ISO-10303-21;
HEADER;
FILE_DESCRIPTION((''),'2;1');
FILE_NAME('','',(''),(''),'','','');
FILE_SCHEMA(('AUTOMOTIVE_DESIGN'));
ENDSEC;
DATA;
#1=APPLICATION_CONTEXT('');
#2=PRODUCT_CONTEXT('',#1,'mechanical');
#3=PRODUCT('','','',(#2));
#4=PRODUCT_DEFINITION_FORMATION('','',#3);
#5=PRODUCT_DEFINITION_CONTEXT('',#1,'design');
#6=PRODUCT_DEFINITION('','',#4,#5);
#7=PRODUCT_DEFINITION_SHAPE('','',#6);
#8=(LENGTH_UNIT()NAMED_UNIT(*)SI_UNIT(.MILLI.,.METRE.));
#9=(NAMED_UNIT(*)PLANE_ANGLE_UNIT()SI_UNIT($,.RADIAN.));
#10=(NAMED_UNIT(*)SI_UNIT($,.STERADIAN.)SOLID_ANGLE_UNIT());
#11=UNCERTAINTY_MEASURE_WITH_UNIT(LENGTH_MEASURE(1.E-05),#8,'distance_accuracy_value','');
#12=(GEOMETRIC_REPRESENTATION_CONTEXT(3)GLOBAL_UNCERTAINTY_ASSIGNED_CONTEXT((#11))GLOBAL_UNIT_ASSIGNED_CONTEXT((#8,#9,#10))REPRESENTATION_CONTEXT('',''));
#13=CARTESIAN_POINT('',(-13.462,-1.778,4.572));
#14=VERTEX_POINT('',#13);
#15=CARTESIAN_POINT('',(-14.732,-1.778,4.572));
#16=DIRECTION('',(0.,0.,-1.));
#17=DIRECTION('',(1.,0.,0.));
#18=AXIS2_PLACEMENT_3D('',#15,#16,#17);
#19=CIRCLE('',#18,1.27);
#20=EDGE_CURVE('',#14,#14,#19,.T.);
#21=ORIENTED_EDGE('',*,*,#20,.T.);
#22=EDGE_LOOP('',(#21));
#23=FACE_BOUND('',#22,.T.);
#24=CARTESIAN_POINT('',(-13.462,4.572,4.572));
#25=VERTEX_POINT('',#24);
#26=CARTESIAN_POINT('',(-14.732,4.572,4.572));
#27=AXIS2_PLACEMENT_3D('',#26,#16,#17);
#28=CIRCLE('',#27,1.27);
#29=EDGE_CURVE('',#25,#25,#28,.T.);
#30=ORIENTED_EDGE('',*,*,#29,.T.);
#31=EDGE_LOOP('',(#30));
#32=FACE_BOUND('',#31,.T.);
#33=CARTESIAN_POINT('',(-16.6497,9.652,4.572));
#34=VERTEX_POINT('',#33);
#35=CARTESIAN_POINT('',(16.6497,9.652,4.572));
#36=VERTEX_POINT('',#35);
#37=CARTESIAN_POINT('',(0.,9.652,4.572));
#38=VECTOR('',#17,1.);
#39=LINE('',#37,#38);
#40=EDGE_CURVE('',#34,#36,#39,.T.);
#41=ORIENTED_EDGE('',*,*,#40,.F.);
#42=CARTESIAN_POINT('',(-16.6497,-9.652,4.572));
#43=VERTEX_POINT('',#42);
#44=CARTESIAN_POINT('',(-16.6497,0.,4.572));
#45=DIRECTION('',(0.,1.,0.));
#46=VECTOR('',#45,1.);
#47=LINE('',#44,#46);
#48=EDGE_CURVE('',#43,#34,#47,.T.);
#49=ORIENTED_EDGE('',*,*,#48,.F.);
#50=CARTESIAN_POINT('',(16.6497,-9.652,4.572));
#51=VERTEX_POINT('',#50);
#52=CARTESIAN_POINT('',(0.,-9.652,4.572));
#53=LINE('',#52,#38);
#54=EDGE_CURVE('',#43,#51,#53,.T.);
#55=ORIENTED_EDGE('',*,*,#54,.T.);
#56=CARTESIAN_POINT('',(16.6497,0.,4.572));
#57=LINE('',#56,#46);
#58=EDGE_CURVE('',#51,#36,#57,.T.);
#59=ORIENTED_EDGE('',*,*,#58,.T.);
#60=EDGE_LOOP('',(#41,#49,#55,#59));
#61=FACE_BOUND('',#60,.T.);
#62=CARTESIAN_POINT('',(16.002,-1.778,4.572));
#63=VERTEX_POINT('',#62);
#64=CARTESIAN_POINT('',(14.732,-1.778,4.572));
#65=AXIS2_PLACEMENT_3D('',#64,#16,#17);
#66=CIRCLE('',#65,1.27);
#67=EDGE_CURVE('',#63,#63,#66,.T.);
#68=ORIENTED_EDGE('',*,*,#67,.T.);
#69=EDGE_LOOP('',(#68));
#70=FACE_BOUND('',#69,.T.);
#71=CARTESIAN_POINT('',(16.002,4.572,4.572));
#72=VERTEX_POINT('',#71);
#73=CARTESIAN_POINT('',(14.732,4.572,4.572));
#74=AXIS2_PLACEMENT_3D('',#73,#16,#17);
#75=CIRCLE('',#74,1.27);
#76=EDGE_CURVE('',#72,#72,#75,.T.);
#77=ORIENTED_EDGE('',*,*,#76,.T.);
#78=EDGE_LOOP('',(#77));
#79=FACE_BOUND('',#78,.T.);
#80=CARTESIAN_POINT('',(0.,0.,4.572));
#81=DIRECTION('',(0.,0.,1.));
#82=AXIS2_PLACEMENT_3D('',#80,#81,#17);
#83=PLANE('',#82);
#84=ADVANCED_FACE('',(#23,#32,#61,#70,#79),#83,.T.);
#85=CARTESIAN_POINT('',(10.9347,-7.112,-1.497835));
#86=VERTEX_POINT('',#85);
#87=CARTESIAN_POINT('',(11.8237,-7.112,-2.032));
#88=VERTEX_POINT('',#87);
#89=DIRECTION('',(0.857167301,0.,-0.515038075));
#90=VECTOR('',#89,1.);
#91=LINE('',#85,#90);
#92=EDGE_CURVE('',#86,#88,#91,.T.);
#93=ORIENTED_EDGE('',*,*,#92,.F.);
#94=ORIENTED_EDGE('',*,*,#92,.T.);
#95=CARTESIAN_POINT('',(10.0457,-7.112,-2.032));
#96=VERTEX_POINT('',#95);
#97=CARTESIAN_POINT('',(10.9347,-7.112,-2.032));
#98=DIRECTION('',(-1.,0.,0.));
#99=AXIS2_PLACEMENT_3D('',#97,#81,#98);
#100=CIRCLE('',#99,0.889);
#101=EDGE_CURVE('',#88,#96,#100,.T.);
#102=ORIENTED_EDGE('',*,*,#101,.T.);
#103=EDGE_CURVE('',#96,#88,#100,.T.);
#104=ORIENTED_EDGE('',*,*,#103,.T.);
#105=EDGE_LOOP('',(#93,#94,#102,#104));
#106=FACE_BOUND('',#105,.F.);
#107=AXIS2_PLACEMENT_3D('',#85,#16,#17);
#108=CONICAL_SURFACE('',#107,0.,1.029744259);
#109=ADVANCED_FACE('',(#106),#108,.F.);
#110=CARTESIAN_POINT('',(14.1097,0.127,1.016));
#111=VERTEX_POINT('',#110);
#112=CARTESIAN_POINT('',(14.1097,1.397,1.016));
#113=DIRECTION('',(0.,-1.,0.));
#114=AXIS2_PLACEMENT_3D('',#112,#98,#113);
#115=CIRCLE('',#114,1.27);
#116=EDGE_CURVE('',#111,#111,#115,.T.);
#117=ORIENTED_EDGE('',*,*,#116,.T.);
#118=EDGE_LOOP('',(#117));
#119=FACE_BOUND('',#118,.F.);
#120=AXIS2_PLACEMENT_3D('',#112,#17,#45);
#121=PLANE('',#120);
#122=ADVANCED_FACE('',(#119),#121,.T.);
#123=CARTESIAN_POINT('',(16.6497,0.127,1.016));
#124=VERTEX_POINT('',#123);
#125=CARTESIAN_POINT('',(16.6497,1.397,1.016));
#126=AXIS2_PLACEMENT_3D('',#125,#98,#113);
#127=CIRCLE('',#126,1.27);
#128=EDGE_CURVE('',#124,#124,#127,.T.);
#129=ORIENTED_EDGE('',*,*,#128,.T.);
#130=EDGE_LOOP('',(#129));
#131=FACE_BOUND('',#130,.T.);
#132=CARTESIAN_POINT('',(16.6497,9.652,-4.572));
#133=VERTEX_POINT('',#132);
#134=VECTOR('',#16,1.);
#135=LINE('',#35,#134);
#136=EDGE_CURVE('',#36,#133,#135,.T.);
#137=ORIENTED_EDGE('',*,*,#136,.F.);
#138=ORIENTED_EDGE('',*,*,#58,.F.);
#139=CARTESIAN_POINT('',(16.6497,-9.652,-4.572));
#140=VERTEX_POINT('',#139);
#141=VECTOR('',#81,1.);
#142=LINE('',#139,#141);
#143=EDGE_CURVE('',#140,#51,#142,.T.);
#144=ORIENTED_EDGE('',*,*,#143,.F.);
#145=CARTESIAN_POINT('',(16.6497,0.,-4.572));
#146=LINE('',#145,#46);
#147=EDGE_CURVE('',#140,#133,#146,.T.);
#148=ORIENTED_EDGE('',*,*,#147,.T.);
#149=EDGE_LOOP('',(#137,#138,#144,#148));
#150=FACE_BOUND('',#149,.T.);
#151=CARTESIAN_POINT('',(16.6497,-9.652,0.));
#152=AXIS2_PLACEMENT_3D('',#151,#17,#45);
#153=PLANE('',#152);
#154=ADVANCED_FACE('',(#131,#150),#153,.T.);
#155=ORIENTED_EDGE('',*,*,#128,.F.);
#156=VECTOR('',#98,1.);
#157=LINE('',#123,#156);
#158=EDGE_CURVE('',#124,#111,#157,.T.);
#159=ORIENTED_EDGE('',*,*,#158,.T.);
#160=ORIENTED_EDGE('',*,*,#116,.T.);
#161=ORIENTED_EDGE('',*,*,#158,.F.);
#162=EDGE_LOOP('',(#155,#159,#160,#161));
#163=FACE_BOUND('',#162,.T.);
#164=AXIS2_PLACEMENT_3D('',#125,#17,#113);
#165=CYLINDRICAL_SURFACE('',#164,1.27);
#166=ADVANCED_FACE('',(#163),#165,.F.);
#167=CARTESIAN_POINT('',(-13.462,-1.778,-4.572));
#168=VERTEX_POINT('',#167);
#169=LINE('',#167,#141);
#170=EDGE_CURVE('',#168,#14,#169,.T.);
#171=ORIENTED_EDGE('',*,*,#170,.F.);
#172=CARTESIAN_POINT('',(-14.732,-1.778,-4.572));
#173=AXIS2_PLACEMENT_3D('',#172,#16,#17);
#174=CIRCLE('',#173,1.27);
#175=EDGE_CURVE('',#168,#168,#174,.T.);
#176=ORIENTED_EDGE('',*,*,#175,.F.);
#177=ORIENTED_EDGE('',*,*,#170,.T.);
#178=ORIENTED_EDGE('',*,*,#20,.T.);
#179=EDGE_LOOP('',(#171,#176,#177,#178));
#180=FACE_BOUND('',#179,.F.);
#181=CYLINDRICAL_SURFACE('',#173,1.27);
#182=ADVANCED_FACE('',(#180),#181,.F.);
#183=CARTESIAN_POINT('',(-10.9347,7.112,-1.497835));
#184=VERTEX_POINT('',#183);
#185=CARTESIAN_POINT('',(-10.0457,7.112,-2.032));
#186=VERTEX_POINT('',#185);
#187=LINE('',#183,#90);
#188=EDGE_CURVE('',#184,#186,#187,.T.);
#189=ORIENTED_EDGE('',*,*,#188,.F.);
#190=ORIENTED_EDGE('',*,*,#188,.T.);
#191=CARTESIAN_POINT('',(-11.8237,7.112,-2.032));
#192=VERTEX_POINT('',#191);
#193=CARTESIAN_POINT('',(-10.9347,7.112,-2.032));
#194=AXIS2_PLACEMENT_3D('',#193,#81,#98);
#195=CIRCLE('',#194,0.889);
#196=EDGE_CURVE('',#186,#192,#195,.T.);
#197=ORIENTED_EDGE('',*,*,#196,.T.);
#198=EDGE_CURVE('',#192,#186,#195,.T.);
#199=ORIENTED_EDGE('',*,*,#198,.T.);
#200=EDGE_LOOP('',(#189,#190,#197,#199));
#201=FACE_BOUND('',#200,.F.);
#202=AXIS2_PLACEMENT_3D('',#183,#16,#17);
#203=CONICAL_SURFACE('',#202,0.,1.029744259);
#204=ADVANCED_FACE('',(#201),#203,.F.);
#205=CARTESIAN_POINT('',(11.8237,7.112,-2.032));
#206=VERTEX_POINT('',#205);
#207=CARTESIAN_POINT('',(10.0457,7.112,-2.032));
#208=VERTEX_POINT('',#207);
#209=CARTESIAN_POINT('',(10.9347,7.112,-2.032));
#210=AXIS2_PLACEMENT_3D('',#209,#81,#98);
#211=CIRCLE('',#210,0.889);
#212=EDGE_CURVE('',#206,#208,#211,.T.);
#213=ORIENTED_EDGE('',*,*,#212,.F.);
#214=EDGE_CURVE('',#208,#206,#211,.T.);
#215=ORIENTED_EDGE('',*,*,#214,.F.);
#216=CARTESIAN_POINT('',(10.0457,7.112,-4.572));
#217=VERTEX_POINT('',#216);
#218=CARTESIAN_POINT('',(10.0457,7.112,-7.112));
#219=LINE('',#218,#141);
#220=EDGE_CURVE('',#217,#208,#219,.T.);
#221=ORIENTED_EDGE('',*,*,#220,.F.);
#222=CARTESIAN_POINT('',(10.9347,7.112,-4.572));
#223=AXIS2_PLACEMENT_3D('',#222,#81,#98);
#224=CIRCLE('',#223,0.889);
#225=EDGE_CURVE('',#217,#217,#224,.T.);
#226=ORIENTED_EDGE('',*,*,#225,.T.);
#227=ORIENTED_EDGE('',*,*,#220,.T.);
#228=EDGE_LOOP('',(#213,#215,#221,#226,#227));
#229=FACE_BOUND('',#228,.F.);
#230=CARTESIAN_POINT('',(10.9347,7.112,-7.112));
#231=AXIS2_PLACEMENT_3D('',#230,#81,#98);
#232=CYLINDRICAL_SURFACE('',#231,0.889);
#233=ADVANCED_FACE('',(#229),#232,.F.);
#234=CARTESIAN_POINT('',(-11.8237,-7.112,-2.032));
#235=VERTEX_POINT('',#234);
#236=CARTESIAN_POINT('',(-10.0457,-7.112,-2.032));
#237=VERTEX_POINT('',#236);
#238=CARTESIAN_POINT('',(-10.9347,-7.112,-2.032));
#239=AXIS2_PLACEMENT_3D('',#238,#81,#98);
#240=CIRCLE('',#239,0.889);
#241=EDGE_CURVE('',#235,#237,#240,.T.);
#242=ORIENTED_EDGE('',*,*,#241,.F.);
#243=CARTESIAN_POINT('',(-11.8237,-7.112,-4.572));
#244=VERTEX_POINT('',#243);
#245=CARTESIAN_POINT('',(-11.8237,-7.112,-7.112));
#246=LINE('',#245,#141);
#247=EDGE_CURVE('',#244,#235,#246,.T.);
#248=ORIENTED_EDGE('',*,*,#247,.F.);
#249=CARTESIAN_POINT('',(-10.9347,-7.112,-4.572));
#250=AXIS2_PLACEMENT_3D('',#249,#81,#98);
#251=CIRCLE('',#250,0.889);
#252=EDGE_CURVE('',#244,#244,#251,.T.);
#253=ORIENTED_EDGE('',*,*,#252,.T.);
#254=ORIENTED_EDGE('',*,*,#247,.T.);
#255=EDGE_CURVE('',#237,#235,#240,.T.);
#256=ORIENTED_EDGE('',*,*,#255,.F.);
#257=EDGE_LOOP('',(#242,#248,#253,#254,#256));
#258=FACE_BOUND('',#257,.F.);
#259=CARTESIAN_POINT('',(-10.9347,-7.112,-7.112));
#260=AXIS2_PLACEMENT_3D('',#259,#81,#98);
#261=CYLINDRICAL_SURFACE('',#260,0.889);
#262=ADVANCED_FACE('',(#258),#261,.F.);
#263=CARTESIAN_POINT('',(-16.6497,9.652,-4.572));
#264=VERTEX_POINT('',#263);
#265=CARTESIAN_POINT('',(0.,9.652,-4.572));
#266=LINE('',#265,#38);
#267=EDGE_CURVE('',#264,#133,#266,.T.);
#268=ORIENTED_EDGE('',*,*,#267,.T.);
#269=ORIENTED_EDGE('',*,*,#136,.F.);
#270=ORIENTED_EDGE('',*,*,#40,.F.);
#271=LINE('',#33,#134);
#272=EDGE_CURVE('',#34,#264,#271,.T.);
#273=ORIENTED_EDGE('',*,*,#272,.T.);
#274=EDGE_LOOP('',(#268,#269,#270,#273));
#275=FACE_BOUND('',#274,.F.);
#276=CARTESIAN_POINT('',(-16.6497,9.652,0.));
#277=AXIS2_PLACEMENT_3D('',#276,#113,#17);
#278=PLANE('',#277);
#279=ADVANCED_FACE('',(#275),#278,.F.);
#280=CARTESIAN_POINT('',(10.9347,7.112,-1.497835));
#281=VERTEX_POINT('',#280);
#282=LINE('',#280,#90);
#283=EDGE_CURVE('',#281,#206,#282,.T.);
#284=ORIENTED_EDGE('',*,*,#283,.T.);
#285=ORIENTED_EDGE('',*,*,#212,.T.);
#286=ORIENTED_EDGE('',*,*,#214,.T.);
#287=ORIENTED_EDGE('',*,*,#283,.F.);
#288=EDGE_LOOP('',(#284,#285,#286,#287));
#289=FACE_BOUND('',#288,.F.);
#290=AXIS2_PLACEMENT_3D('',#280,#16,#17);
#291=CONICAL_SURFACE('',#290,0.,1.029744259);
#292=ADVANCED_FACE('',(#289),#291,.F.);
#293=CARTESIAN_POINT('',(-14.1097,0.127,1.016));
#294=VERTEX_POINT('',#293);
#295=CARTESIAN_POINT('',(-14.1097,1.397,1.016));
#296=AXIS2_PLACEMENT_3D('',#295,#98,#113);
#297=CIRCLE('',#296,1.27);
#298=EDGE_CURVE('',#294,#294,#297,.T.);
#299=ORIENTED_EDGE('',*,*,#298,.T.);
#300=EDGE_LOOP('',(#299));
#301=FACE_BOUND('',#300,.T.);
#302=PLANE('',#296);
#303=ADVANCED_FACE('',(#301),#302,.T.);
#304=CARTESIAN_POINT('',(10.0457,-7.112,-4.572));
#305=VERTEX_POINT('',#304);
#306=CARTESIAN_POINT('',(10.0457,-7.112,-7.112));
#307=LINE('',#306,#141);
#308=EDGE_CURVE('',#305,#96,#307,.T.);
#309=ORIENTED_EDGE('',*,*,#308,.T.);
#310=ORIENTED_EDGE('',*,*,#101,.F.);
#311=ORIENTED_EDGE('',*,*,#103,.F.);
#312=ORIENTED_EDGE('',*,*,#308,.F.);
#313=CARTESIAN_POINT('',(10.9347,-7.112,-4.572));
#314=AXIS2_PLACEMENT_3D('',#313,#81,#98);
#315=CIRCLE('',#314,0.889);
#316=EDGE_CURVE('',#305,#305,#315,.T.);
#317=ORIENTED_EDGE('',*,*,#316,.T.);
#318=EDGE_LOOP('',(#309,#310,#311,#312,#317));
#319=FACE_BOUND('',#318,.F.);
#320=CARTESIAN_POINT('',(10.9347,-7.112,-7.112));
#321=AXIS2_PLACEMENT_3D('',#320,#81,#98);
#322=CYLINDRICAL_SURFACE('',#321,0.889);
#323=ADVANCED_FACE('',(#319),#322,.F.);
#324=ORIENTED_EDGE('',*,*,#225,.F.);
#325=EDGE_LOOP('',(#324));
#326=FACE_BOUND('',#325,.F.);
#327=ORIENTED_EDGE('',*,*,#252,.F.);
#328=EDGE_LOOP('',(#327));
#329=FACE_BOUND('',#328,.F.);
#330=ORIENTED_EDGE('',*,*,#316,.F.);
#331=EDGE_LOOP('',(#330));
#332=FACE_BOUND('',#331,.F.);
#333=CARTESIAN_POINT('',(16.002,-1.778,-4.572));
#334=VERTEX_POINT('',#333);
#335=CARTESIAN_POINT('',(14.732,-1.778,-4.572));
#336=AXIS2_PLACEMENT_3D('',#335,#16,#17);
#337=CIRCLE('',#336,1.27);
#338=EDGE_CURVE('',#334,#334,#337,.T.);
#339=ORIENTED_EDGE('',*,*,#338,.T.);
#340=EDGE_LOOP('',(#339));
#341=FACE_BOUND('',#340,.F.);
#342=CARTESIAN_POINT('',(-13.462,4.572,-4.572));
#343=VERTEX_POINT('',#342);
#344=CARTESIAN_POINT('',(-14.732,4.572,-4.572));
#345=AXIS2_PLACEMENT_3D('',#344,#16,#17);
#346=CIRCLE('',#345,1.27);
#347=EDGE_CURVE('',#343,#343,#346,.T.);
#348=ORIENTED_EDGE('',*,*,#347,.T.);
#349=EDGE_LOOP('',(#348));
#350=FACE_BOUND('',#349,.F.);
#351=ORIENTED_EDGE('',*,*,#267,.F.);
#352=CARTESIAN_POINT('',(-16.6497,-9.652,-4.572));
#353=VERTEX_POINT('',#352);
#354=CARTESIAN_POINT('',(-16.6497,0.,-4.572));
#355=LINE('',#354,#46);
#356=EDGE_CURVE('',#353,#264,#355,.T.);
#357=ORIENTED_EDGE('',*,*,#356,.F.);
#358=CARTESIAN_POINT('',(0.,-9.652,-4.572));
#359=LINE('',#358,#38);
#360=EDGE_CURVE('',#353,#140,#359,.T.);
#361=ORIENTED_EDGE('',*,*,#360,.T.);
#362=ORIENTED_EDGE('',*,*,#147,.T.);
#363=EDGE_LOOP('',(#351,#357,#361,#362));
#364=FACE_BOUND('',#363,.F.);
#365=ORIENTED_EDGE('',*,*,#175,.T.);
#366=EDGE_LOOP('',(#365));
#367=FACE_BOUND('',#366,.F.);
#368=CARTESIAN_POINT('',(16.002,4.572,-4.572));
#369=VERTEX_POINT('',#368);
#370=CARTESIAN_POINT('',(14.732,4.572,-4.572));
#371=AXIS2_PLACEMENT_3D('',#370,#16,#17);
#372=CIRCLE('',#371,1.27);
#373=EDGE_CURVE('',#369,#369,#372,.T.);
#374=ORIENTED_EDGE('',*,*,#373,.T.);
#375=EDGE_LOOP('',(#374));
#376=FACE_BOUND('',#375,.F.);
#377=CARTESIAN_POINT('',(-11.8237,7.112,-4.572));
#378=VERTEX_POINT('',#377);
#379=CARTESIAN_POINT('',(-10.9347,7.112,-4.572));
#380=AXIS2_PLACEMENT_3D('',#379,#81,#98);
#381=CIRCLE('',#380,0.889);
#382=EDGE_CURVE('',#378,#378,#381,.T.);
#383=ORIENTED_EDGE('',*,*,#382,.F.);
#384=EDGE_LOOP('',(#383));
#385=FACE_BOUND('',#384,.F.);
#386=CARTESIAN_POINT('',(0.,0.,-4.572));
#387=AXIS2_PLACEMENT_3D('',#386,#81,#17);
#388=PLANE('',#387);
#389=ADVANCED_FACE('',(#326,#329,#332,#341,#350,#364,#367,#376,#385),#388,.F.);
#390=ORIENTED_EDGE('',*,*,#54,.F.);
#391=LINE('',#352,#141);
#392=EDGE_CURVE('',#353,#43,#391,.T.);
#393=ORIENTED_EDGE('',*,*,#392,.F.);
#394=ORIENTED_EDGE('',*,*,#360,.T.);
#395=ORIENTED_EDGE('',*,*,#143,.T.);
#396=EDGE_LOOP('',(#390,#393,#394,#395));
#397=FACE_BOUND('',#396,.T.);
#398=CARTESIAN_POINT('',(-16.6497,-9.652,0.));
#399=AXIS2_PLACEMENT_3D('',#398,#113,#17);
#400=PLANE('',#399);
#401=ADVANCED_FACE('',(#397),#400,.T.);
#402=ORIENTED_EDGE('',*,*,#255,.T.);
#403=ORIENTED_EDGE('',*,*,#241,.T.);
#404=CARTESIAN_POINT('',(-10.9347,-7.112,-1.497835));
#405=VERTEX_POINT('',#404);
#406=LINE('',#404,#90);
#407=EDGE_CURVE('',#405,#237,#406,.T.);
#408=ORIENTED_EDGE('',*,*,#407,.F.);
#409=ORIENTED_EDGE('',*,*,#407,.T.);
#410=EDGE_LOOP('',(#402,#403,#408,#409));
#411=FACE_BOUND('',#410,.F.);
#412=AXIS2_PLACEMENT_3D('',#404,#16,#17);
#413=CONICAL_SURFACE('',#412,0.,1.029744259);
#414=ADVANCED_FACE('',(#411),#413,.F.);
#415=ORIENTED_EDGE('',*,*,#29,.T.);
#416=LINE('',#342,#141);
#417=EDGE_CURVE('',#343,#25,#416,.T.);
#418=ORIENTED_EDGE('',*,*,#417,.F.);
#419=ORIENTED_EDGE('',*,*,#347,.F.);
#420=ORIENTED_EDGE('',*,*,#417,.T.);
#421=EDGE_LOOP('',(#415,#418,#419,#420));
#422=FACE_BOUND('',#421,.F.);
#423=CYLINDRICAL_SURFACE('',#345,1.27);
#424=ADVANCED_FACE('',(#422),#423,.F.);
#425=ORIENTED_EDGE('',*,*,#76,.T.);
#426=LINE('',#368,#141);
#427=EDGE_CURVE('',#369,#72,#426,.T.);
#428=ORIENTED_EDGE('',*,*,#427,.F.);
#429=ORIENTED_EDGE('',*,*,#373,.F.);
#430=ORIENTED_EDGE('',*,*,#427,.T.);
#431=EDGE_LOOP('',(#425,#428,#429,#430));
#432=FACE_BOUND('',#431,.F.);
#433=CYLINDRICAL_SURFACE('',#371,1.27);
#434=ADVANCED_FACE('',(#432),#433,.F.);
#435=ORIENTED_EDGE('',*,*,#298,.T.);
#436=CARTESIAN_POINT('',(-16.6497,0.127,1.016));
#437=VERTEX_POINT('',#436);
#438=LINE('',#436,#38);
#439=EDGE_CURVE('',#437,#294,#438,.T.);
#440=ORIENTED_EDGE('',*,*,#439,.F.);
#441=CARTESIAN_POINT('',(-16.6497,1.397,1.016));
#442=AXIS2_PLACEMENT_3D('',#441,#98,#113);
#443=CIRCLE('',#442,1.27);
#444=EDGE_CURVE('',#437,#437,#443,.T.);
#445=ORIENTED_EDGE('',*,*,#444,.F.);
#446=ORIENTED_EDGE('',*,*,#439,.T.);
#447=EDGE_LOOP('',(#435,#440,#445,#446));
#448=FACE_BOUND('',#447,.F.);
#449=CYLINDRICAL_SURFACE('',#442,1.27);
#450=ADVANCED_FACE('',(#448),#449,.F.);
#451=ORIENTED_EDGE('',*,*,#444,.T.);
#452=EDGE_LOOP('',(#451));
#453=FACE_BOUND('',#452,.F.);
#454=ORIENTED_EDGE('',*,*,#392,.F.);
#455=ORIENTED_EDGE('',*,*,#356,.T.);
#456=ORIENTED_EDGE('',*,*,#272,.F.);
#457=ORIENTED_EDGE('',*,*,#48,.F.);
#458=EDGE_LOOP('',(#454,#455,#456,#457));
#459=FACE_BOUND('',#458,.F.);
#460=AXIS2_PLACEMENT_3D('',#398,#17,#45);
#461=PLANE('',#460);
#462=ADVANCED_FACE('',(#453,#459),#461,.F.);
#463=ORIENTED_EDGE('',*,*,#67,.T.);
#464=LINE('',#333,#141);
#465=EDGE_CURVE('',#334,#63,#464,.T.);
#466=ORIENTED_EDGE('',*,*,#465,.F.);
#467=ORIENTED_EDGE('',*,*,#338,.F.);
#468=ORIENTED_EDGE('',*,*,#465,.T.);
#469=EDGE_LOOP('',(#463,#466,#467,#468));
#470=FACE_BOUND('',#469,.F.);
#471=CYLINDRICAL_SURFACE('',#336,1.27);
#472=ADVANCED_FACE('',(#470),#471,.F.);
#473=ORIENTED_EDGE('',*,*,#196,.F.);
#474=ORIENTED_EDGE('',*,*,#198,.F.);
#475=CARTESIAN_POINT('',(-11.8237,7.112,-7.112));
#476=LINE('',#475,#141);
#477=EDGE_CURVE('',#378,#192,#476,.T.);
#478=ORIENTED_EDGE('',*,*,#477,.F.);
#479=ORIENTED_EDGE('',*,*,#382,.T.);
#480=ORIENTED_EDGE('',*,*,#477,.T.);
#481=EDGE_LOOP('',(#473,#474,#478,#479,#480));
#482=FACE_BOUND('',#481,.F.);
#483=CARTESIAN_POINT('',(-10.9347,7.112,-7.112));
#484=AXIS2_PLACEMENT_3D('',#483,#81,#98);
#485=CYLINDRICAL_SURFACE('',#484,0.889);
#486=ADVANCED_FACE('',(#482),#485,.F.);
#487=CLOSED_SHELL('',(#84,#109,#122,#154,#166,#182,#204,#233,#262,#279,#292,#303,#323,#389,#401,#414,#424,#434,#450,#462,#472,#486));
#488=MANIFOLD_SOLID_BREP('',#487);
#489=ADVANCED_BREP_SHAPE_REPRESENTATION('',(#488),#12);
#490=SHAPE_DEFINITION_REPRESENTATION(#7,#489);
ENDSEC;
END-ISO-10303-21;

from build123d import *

# Parameters (mm, degrees)
F0_W     = 33.2994
F0_H     = 19.304
F1_DEPTH = 4.572
F2_R     = 1.27
F3_DEPTH = 2.54
F5_D     = 1.778
F5_DEPTH = 2.54
F5_TIP   = 0.5341650903
F8_R     = 1.27
F9_DEPTH = 9.145


# Not quite as in the source:
# - a pattern or mirror of a feature is missing from the dataset's text; its kind, count and spacing are read off the source's solid


with BuildPart() as f1:
    # F0 (on Top) → F1 (new body, symmetric)
    with BuildSketch(Plane.XY):
        Rectangle(F0_W, F0_H)
    extrude(amount=F1_DEPTH, both=True)

    # F2 (on face) → F3 (cut)
    with BuildSketch(Plane(origin=(-16.6497, 0, 0), x_dir=(0, -1, 0), z_dir=(-1, 0, 0))):
        with Locations((-1.397, 1.016)):
            Circle(F2_R)
    f3 = extrude(amount=-F3_DEPTH, mode=Mode.SUBTRACT)

    # F3_copies: F3 across plane
    add(f3.mirror(Plane(origin=(0, 0, 0), x_dir=(0, 0, 1), z_dir=(1, 0, 0))), mode=Mode.SUBTRACT)

    # F5
    with Locations(Plane(origin=(0, 0, -4.572), x_dir=(1, 0, 0), z_dir=(0, 0, -1))):
        with Locations((10.9347, -7.112), (10.9347, 7.112), (-10.9347, -7.112), (-10.9347, 7.112)):
            Hole(F5_D / 2, depth=F5_DEPTH)
            with Locations((0, 0, -(F5_DEPTH + F5_TIP / 2))):  # 118° drill point
                Cone(0, F5_D / 2, F5_TIP, mode=Mode.SUBTRACT)

    # F8 (on face) → F9 (cut, through all)
    with BuildSketch(Plane(origin=(0, 0, -4.572), x_dir=(1, 0, 0), z_dir=(0, 0, -1))):
        with Locations((-14.732, 1.778)):
            Circle(F8_R)
        with Locations((-14.732, -4.572)):
            Circle(F8_R)
        with Locations((14.732, 1.778)):
            Circle(F8_R)
        with Locations((14.732, -4.572)):
            Circle(F8_R)
    extrude(amount=-F9_DEPTH, mode=Mode.SUBTRACT)


solid = f1.part
